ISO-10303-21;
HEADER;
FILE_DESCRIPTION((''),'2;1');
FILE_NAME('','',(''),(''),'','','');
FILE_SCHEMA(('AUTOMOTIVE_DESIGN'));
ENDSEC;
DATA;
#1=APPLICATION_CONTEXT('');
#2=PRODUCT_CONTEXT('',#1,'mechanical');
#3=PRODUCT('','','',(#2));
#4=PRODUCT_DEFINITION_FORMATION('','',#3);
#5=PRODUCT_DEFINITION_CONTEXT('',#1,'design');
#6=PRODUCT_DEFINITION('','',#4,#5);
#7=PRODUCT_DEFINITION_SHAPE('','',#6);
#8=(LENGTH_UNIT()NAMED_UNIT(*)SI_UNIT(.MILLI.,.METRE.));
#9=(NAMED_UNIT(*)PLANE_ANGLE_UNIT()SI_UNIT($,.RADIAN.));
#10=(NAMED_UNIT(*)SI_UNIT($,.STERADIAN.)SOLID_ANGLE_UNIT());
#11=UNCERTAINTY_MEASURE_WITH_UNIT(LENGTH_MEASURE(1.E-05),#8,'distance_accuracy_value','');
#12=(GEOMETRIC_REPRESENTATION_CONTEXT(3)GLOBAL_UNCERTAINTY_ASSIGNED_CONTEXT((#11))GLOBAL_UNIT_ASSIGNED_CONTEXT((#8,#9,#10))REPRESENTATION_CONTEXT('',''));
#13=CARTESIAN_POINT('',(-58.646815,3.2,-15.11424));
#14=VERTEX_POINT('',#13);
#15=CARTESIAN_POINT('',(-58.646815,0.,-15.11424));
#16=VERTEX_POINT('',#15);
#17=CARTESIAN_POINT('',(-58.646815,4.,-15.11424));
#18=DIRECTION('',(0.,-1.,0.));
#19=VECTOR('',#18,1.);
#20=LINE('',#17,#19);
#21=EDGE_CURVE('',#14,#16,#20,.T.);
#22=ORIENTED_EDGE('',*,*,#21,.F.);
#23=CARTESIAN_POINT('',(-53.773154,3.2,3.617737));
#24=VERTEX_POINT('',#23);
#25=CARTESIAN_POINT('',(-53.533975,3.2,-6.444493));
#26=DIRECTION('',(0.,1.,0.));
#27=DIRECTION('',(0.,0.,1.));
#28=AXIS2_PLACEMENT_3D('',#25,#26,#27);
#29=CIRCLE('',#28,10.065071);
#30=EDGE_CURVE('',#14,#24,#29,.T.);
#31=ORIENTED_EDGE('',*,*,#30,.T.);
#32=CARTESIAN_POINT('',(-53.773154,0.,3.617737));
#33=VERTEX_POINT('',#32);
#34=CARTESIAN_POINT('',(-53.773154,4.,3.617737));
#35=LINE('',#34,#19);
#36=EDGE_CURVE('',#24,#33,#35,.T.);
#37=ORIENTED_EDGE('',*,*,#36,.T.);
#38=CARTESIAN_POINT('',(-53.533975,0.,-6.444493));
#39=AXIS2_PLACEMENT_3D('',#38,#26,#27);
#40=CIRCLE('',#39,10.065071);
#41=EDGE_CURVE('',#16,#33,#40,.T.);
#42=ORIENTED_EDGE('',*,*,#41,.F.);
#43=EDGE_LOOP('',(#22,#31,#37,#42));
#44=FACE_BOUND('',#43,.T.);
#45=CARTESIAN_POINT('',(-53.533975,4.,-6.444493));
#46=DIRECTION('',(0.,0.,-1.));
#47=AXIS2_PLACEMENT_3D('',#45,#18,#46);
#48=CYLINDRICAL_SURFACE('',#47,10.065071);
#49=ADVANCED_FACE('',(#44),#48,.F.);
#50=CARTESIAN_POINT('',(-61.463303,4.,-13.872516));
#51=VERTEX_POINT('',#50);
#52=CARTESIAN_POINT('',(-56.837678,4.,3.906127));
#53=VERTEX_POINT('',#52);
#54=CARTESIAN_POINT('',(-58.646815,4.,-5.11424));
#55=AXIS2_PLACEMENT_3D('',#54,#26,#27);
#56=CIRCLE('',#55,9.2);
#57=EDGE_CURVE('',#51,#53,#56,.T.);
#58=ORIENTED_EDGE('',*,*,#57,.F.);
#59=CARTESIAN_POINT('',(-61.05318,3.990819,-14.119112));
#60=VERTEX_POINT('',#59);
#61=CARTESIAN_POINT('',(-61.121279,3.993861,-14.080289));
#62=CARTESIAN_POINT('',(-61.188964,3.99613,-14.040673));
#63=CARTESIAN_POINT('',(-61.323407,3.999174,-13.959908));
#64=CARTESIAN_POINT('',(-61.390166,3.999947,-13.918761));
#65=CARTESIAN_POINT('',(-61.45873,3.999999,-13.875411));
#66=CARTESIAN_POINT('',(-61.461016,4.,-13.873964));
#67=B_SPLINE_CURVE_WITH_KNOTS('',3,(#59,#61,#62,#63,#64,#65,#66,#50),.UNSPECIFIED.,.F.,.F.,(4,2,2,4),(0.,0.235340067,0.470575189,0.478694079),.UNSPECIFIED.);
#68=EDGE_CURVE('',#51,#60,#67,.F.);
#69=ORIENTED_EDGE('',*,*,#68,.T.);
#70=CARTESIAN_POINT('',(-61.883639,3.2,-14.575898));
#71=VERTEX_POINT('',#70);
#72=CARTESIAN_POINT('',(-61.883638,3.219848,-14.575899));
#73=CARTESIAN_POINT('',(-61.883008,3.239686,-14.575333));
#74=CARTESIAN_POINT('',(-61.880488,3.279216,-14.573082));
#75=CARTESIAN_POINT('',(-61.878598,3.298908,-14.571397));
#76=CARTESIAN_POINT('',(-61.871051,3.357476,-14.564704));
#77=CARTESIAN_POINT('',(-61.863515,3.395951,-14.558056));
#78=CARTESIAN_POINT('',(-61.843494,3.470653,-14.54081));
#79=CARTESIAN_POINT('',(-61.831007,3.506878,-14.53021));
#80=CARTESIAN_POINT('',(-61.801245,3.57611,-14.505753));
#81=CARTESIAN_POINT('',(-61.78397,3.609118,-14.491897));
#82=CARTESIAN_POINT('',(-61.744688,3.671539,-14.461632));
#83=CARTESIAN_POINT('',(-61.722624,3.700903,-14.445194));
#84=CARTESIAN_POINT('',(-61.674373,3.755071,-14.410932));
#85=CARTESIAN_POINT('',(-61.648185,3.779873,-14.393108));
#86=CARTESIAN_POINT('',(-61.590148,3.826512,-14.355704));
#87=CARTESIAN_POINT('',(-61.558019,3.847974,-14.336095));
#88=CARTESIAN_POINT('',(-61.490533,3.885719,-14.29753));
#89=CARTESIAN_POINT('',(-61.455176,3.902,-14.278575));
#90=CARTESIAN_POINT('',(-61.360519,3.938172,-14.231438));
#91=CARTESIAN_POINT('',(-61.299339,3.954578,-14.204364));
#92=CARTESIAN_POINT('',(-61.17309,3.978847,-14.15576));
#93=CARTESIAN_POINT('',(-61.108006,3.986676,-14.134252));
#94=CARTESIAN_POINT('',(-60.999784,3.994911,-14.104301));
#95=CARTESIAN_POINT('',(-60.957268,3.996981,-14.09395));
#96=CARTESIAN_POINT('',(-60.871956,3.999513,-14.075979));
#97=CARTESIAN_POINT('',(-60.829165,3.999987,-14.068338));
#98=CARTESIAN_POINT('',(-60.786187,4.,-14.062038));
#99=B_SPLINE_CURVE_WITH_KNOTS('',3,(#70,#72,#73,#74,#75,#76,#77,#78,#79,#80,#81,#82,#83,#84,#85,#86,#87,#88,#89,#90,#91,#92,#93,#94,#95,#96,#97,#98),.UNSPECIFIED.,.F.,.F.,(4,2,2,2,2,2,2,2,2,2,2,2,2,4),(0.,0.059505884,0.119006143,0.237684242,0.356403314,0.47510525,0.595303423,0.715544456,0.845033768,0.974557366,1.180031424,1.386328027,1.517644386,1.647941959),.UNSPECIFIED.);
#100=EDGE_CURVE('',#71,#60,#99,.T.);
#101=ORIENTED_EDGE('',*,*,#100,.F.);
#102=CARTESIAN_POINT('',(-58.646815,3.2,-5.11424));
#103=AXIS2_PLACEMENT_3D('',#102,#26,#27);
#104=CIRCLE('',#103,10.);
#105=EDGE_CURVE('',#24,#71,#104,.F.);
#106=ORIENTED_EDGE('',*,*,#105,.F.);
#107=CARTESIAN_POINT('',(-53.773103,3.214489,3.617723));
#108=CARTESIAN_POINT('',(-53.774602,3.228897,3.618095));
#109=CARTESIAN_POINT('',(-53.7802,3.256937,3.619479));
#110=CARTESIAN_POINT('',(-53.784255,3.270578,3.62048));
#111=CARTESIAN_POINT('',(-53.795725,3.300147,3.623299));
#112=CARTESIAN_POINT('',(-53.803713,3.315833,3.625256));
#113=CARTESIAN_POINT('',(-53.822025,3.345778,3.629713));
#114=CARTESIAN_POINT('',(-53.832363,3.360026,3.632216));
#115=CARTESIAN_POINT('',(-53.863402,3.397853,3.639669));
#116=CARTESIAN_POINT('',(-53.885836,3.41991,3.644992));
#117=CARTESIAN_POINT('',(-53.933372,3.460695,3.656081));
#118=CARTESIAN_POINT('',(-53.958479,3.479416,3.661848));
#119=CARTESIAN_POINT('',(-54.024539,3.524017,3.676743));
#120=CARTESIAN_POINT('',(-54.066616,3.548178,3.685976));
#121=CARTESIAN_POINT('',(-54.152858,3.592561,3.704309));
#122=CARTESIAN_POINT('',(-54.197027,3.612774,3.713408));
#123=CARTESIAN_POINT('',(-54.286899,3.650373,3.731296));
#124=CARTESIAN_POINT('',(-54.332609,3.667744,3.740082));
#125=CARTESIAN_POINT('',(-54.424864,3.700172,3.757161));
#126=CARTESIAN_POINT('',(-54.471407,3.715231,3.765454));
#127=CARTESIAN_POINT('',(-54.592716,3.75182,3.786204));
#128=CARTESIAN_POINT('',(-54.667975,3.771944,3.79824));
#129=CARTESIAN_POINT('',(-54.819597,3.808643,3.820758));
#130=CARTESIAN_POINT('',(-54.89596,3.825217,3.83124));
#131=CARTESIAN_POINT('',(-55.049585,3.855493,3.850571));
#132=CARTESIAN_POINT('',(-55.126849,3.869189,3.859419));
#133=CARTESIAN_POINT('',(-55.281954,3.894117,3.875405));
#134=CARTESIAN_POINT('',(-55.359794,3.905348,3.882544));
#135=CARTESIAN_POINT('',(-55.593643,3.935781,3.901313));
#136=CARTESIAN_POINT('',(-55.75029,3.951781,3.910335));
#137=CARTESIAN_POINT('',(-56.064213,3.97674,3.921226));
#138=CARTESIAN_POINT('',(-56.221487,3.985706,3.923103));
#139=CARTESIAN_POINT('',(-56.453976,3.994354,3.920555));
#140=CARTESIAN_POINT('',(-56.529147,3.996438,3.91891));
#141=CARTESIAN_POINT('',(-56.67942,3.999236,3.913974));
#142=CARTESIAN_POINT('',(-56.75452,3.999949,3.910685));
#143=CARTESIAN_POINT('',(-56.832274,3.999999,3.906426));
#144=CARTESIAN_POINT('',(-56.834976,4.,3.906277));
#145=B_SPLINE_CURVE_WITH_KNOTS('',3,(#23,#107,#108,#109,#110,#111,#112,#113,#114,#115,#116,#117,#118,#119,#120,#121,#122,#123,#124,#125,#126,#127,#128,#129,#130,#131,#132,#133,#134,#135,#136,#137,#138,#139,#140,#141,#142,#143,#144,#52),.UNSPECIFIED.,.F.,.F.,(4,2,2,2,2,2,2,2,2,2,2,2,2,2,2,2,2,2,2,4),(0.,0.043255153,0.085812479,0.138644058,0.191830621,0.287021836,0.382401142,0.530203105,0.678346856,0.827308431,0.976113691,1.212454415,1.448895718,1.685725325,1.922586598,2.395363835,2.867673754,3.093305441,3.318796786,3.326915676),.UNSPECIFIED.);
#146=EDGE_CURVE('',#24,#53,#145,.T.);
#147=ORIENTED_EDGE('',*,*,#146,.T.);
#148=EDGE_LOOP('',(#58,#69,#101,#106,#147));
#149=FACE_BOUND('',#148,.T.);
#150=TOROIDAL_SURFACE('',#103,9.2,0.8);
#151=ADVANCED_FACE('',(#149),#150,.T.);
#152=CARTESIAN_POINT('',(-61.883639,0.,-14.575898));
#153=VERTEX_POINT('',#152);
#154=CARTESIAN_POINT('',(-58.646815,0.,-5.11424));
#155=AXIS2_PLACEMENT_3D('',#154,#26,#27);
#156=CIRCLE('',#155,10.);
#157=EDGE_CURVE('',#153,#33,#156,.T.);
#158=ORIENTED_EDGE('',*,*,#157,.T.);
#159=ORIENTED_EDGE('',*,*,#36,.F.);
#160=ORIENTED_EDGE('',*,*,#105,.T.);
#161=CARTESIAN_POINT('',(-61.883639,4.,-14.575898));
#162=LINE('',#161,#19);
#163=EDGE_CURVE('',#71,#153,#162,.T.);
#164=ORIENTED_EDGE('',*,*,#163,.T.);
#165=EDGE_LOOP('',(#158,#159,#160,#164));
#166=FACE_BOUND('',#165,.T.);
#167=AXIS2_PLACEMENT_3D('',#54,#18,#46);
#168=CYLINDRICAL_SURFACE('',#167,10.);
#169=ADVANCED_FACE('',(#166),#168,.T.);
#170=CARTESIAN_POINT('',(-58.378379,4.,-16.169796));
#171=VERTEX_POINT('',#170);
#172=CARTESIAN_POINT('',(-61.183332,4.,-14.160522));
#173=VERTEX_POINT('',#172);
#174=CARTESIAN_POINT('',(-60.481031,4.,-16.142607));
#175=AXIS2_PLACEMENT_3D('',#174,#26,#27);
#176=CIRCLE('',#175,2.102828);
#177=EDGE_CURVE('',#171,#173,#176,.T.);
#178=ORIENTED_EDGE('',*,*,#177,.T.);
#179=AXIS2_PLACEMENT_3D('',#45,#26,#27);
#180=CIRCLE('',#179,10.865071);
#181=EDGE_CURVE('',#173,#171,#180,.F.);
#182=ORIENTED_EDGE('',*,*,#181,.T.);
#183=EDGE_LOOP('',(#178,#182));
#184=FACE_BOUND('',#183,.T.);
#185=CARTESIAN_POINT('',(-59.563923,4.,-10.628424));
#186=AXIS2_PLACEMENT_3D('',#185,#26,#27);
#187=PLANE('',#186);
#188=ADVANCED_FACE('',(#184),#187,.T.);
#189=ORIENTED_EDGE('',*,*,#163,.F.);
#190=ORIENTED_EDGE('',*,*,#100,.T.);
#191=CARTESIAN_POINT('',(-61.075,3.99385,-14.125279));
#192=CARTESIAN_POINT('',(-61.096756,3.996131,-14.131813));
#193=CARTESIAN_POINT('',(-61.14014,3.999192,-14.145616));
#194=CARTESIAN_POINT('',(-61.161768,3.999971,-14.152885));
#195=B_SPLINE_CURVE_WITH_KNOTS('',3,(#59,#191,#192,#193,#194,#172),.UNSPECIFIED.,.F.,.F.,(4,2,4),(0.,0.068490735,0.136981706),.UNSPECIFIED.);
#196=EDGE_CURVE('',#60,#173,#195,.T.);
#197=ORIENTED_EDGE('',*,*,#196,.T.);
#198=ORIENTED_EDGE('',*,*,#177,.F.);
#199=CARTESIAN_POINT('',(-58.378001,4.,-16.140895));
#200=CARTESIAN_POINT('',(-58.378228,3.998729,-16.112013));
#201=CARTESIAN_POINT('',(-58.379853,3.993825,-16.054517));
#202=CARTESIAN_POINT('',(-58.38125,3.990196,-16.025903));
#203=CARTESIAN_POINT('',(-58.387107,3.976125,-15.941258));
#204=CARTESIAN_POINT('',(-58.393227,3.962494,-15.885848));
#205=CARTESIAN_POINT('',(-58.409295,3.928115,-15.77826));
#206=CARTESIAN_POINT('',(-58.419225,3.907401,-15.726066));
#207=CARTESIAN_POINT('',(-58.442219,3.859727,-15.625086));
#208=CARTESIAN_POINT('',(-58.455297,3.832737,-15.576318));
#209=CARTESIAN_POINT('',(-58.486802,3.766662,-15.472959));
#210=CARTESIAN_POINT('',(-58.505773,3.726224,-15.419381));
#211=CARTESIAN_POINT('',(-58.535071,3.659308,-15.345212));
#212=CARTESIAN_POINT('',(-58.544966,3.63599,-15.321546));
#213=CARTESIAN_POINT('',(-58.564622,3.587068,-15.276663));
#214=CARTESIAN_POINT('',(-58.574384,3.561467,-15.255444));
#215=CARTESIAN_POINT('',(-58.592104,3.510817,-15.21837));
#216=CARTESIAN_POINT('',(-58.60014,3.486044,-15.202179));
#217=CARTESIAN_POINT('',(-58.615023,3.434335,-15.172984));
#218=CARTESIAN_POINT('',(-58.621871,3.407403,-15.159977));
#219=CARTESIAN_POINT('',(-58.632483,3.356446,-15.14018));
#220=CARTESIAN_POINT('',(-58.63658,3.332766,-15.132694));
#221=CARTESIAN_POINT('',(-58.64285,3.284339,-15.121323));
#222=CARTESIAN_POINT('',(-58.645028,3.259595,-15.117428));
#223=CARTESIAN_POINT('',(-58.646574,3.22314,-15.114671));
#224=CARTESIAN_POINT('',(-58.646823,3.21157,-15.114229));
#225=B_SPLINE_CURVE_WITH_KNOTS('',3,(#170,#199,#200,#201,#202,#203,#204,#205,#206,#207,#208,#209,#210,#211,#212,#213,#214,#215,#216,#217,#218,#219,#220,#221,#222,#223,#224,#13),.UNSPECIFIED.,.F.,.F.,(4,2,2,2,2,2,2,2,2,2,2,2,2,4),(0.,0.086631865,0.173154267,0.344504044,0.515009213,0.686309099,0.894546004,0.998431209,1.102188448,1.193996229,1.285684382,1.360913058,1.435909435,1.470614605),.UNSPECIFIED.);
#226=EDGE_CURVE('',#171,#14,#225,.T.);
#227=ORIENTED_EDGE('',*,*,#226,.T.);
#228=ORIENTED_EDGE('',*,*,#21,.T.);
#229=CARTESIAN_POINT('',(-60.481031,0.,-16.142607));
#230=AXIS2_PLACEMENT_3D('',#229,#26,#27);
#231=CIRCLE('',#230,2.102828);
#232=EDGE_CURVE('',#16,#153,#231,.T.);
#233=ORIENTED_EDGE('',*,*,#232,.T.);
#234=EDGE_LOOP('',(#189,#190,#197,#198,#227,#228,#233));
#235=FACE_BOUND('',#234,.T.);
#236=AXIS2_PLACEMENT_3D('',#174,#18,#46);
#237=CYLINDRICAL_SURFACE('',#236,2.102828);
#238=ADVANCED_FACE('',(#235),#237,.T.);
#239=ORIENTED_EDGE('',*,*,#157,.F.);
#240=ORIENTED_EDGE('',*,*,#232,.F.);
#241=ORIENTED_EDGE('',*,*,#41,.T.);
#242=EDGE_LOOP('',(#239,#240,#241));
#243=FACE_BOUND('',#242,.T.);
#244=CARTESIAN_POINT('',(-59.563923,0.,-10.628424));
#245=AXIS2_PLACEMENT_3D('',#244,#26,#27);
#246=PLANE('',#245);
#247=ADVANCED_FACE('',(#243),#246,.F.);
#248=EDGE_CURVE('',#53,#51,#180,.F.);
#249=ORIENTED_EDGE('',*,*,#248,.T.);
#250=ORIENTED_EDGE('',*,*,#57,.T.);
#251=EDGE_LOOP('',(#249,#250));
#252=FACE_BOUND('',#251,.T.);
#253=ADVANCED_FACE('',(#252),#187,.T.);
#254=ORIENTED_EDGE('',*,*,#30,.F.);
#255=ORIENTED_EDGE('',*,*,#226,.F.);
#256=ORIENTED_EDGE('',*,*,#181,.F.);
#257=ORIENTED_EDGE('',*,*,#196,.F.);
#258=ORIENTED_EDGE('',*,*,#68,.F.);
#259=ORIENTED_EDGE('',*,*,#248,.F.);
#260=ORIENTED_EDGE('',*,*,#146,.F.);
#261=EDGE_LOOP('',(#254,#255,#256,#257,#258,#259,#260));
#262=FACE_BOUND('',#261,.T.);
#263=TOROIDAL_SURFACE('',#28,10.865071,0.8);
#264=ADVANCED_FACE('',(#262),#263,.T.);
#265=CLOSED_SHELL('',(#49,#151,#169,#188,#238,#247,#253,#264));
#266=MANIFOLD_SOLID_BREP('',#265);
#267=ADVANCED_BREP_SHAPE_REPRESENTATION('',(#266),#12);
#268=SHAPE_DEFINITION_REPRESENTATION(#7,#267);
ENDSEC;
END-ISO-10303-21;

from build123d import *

# Parameters (mm, degrees)
SALIENTE_EXTRUIR1_DEPTH = 4
REDONDEO6_R             = 0.8


with BuildPart() as part:
    # Croquis1 → Saliente-Extruir1 (new body)
    with BuildSketch(Plane(origin=(0, 0, 0), x_dir=(1, 0, 0), z_dir=(0, 1, 0))):
        with BuildLine():
            ThreePointArc((-61.883639125, 14.575898233), (-67.780374095, 1.042618708), (-53.773153629, -3.61773673))
            ThreePointArc((-53.773153629, -3.61773673), (-63.274753441, 3.910149301), (-58.646815221, 15.11424029))
            ThreePointArc((-58.646815221, 15.11424029), (-60.82603012, 18.216941024), (-61.883639125, 14.575898233))
        make_face()
    extrude(amount=SALIENTE_EXTRUIR1_DEPTH)

    # Redondeo6
    # the kernel refuses this fillet: 0.8 mm, written as the material it takes off along each edge
    with BuildSketch(Plane(origin=(-53.533974817, 4, -6.444492505), x_dir=(0.17426350002173693, 0, 0.9846990568494387), z_dir=(0.9846990568494387, 0, -0.17426350002173693))) as redondeo6_piece_1:
        with BuildLine():
            CenterArc((10.065071469 + REDONDEO6_R, REDONDEO6_R), REDONDEO6_R, 180, 90)
            Line((10.065071469 + REDONDEO6_R, 0), (10.065071469, 0))
            Line((10.065071469, 0), (10.065071469, REDONDEO6_R))
        make_face()
    revolve(axis=Axis((-53.533974817, 4, -6.444492505), (0, -1, 0)), revolution_arc=170.903989059, mode=Mode.SUBTRACT)
    with BuildSketch(Plane(origin=(-58.646815221, 4, -5.11424029), x_dir=(-0.12889969509175428, 0, -0.9916576367906682), z_dir=(0.9916576367906682, 0, -0.12889969509175428))) as redondeo6_piece_2_section:
        with BuildLine():
            CenterArc((10 - REDONDEO6_R, -REDONDEO6_R), REDONDEO6_R, 0, 90)
            Line((10 - REDONDEO6_R, 0), (10, 0))
            Line((10, 0), (10, -REDONDEO6_R))
        make_face()
    redondeo6_piece_2 = revolve(axis=Axis((-58.646815221, 4, -5.11424029), (0, 1, 0)), revolution_arc=213.241351406, mode=Mode.PRIVATE)
    redondeo6_piece_2 = redondeo6_piece_2 - Plane(origin=(-60.481031052, 3.778290137, -16.142607032), x_dir=(0.8722614376655369, 0, 0.48903985968594704), z_dir=(0, -1, 0)) * Cylinder(2.102828064, 41, mode=Mode.PRIVATE)
    add(redondeo6_piece_2, mode=Mode.SUBTRACT)


solid = part.part
